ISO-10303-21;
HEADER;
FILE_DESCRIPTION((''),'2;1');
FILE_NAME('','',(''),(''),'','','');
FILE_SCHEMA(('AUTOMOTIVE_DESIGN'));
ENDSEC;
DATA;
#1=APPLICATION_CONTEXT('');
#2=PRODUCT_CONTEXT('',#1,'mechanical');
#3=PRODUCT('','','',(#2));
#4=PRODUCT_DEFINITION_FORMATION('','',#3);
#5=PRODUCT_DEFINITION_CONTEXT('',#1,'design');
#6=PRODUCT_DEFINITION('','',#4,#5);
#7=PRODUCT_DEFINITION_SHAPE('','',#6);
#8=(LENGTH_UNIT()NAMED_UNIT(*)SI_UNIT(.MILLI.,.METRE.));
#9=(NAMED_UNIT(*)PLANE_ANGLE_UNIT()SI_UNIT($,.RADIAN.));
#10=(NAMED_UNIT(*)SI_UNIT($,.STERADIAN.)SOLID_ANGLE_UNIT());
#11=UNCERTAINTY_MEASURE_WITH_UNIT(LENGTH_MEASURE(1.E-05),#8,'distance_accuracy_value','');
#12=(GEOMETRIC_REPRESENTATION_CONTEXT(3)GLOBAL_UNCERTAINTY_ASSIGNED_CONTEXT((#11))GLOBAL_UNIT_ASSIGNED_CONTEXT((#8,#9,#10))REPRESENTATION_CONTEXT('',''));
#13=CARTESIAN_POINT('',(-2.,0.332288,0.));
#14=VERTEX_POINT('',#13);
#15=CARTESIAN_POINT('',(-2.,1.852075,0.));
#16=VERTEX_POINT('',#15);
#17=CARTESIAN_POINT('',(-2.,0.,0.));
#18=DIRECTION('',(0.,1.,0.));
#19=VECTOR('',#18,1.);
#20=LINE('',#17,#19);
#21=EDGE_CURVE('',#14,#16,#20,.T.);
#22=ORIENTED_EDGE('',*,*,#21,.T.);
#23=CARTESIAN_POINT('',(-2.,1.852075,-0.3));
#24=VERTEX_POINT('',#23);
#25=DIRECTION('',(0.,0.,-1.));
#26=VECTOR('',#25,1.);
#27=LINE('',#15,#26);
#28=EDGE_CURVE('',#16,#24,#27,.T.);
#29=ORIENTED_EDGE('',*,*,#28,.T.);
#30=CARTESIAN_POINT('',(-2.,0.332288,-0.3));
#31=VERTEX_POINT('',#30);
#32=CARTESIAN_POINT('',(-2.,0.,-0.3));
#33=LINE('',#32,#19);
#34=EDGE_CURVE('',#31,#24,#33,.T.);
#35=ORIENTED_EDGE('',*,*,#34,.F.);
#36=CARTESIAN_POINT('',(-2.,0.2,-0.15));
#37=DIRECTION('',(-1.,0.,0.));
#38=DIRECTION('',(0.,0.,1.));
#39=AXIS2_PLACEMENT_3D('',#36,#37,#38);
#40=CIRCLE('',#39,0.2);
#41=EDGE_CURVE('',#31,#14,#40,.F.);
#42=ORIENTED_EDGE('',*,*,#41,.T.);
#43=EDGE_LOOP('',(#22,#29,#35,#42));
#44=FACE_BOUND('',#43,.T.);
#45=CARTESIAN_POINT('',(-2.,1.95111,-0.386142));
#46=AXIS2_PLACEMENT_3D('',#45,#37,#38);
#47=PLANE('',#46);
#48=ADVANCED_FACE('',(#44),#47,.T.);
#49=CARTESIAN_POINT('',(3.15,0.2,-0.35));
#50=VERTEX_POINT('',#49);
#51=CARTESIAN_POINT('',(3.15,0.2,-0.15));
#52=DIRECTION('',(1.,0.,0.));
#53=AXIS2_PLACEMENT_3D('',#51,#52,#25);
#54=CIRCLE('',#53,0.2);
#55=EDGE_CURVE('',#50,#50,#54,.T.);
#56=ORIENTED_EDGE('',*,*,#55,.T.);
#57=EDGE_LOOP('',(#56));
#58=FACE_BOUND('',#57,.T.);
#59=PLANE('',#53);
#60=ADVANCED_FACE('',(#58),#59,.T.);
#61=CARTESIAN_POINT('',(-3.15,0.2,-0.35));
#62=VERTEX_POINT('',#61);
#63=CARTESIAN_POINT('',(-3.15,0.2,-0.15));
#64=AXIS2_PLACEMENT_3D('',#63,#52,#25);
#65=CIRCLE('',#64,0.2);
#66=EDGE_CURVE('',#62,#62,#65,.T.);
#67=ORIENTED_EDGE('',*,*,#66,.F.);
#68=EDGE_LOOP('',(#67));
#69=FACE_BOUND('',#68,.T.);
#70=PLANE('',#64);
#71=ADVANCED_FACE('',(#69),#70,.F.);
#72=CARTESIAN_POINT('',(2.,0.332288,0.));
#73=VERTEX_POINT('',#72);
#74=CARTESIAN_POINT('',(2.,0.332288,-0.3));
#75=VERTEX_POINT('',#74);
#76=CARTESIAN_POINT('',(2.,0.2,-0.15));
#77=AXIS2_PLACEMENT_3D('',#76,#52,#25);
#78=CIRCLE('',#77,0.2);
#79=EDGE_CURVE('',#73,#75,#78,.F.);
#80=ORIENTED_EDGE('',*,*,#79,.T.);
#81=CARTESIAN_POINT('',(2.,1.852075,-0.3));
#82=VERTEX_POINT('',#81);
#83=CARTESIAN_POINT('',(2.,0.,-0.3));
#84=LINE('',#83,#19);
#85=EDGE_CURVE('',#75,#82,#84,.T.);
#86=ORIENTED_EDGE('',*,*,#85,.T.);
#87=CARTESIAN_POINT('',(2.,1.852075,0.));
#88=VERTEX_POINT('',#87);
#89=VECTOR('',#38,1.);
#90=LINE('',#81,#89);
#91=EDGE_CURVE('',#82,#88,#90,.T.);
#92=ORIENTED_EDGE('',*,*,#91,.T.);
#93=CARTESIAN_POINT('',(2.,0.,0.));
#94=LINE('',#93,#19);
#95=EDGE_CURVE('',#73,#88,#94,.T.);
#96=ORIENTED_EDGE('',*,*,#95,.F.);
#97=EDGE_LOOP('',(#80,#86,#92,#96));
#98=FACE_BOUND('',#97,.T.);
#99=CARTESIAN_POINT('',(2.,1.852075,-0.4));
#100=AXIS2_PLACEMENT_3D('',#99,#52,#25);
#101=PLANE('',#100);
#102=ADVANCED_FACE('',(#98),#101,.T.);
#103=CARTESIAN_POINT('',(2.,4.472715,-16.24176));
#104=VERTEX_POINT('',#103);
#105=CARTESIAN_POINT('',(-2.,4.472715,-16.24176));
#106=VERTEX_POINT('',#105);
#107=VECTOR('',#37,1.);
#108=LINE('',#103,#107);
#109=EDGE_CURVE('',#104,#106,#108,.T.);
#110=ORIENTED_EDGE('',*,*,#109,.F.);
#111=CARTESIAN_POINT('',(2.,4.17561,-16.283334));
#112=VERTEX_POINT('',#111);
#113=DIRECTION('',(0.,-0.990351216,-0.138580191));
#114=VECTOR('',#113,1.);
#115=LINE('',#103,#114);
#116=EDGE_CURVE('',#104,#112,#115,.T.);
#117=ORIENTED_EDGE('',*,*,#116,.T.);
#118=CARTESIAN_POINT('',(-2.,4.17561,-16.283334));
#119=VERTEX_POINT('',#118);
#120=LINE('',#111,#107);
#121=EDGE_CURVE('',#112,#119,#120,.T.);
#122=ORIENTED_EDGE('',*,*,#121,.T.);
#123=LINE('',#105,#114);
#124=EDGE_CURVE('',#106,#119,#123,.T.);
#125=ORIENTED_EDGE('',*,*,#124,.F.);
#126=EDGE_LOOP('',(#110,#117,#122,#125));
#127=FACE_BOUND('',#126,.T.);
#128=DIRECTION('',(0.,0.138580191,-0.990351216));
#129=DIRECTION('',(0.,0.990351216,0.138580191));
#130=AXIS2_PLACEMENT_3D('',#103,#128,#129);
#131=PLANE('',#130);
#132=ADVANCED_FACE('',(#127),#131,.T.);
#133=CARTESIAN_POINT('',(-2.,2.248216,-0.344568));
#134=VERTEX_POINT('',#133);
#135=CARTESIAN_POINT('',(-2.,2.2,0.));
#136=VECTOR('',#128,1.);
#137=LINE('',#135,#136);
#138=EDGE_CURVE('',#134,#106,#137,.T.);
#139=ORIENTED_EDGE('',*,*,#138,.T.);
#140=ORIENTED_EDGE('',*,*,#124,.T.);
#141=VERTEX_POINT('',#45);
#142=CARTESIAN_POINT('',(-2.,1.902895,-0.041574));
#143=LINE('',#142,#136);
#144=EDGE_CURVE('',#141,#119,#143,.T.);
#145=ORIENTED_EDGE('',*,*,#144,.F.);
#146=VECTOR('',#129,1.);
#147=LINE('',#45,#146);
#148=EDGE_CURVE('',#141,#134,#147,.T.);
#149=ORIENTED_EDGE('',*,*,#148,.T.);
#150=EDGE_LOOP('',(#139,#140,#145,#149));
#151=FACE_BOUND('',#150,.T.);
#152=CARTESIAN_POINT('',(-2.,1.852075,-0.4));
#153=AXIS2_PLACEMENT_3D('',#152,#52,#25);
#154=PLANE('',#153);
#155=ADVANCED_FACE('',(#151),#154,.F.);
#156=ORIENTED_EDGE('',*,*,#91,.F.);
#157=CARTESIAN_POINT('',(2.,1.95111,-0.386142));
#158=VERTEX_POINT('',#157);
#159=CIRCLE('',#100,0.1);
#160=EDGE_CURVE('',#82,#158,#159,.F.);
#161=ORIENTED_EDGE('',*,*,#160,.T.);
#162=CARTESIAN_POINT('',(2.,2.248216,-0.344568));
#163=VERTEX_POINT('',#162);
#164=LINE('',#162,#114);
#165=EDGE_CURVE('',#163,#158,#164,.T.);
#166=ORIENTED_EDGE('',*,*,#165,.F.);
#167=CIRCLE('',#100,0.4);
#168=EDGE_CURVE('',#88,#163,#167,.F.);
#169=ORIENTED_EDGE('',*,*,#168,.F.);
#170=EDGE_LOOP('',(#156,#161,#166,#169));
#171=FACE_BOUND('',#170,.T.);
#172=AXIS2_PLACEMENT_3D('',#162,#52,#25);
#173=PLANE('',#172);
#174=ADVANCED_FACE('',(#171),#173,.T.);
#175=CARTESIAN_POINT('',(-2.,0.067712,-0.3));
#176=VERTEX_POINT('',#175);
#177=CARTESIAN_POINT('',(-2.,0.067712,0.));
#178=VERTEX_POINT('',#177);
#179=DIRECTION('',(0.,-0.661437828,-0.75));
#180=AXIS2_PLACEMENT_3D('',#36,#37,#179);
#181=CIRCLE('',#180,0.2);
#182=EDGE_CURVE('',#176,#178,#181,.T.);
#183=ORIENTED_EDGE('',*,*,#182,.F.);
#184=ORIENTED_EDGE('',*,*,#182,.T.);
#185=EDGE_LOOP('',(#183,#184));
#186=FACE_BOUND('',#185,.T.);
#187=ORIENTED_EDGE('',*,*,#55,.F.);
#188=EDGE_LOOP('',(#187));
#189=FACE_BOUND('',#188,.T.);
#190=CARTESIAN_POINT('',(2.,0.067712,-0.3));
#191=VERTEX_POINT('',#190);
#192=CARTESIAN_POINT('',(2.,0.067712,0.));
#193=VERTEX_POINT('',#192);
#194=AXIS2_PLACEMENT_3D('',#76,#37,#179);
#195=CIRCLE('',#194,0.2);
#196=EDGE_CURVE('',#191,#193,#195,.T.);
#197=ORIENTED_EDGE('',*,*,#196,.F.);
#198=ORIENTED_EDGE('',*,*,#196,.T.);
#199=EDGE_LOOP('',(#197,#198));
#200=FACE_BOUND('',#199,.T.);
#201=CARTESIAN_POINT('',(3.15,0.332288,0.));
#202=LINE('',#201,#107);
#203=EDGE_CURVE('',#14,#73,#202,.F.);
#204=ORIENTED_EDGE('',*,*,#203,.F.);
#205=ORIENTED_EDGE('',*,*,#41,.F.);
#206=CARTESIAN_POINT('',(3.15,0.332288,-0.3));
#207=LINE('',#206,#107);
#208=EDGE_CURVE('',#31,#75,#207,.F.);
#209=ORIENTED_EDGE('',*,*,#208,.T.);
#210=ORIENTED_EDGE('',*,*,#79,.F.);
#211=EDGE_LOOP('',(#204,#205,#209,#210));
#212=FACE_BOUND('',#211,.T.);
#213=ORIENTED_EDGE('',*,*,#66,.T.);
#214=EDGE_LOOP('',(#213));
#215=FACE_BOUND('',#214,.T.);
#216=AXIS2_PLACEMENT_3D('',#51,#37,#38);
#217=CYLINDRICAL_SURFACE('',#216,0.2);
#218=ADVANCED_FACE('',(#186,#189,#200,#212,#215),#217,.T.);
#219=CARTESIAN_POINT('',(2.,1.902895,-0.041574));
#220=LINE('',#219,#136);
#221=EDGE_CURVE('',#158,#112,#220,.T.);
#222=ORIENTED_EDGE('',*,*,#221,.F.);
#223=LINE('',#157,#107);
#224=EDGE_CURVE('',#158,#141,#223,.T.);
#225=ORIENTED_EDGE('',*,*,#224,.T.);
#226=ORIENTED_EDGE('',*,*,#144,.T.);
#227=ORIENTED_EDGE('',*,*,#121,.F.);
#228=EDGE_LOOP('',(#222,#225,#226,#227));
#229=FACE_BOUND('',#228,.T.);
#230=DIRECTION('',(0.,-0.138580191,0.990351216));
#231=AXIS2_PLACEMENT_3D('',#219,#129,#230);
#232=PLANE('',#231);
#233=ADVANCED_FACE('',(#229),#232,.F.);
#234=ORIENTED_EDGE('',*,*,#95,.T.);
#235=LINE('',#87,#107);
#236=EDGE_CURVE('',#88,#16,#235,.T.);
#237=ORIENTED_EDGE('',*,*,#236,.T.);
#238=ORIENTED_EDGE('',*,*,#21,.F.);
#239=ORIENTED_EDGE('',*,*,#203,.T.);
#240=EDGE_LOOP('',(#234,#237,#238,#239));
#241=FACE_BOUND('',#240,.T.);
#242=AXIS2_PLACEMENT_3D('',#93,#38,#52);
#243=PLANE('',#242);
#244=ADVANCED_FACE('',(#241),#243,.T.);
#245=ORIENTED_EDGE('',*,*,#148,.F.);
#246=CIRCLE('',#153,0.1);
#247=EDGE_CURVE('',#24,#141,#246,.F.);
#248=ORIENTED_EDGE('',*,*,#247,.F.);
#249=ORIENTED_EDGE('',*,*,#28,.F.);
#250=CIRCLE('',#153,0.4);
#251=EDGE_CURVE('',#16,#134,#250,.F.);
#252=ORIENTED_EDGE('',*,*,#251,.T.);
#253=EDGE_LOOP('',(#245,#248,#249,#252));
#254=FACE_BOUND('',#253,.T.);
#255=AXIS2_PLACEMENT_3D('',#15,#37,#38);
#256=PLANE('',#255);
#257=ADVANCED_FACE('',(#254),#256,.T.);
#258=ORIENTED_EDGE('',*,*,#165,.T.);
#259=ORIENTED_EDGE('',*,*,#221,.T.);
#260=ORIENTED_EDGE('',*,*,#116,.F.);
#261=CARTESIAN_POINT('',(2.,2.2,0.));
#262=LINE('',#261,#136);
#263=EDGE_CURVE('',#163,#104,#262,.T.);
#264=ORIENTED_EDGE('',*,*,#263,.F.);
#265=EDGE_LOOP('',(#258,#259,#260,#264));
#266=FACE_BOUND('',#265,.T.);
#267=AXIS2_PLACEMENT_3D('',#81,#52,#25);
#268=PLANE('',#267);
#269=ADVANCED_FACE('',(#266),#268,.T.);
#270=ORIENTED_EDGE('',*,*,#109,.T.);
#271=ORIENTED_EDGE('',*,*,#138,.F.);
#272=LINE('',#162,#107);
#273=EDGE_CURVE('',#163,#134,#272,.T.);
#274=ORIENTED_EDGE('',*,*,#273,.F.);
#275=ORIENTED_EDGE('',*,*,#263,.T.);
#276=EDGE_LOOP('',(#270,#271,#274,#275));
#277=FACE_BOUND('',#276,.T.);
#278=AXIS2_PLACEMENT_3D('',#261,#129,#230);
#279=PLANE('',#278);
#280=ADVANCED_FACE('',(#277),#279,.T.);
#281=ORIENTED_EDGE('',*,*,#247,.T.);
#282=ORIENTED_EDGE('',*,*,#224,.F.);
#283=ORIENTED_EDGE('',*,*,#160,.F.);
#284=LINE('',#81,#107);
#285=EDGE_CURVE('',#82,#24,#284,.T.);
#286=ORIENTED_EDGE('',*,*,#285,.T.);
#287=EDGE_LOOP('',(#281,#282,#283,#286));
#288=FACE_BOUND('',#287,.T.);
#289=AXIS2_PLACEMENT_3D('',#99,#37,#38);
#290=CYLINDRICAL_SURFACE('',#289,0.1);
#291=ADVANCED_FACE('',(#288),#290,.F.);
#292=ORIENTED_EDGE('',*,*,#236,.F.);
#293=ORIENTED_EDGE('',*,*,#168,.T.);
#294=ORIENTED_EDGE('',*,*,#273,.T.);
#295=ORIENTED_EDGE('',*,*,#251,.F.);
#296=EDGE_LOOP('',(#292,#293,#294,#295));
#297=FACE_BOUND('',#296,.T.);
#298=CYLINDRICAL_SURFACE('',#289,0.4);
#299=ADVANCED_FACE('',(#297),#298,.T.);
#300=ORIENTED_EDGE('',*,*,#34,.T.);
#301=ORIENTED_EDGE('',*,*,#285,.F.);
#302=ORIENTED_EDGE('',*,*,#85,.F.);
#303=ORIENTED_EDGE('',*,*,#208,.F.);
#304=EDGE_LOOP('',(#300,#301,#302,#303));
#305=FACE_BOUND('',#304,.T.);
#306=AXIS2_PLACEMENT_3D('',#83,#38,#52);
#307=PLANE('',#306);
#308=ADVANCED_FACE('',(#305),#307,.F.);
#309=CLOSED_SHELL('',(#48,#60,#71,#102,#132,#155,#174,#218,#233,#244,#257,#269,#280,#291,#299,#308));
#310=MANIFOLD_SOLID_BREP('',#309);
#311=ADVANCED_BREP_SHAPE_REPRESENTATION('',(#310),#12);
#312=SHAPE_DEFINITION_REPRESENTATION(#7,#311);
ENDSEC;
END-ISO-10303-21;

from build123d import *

# Parameters (mm, degrees)
BASE_FLANGE1_DEPTH     = 2
CUT_EXTRUDE1_START     = -2
CUT_EXTRUDE1_OUTLINE_W = 0.3
CUT_EXTRUDE1_OUTLINE_H = 0.067712434
CUT_EXTRUDE1_DEPTH     = 4
SKETCH8_R              = 0.2
BOSS_EXTRUDE1_DEPTH    = 3.15


# Read off the part's stored shape, not the designer's step: Cut-Extrude1
# Sheet-metal steps are written as plain solids
with BuildPart() as part:
    # Sketch1 → Base-Flange1 (new, symmetric)
    with BuildSketch(Plane(origin=(0, 0, 0), x_dir=(0, 0, -1), z_dir=(1, 0, 0))):
        with BuildLine():
            Line((0, 0), (0, 1.852075023))
            ThreePointArc((0, 1.852075023), (0.09819474, 2.114588994), (0.344567924, 2.24821551))
            Line((0.344567924, 2.24821551), (16.24175994, 4.472715125))
            Line((16.24175994, 4.472715125), (16.283333998, 4.17560976))
            Line((16.283333998, 4.17560976), (0.386141981, 1.951110145))
            ThreePointArc((0.386141981, 1.951110145), (0.324548685, 1.917703516), (0.3, 1.852075023))
            Line((0.3, 1.852075023), (0.3, 0))
            Line((0.3, 0), (0, 0))
        make_face()
    extrude(amount=BASE_FLANGE1_DEPTH, both=True)

    # Cut-Extrude1 outline → Cut-Extrude1 (cut)
    with BuildSketch(Plane(origin=(0, 0, 0), x_dir=(0, 0, -1), z_dir=(1, 0, 0)).offset(CUT_EXTRUDE1_START)):
        with Locations((0.15, 0.033856217)):
            Rectangle(CUT_EXTRUDE1_OUTLINE_W, CUT_EXTRUDE1_OUTLINE_H)
    extrude(amount=CUT_EXTRUDE1_DEPTH, mode=Mode.SUBTRACT)

    # Sketch8 → Boss-Extrude1 (add, symmetric)
    with BuildSketch(Plane(origin=(0, 0, 0), x_dir=(0, 0, -1), z_dir=(1, 0, 0))):
        with Locations((0.15, 0.2)):
            Circle(SKETCH8_R)
    extrude(amount=BOSS_EXTRUDE1_DEPTH, both=True)


solid = part.part
